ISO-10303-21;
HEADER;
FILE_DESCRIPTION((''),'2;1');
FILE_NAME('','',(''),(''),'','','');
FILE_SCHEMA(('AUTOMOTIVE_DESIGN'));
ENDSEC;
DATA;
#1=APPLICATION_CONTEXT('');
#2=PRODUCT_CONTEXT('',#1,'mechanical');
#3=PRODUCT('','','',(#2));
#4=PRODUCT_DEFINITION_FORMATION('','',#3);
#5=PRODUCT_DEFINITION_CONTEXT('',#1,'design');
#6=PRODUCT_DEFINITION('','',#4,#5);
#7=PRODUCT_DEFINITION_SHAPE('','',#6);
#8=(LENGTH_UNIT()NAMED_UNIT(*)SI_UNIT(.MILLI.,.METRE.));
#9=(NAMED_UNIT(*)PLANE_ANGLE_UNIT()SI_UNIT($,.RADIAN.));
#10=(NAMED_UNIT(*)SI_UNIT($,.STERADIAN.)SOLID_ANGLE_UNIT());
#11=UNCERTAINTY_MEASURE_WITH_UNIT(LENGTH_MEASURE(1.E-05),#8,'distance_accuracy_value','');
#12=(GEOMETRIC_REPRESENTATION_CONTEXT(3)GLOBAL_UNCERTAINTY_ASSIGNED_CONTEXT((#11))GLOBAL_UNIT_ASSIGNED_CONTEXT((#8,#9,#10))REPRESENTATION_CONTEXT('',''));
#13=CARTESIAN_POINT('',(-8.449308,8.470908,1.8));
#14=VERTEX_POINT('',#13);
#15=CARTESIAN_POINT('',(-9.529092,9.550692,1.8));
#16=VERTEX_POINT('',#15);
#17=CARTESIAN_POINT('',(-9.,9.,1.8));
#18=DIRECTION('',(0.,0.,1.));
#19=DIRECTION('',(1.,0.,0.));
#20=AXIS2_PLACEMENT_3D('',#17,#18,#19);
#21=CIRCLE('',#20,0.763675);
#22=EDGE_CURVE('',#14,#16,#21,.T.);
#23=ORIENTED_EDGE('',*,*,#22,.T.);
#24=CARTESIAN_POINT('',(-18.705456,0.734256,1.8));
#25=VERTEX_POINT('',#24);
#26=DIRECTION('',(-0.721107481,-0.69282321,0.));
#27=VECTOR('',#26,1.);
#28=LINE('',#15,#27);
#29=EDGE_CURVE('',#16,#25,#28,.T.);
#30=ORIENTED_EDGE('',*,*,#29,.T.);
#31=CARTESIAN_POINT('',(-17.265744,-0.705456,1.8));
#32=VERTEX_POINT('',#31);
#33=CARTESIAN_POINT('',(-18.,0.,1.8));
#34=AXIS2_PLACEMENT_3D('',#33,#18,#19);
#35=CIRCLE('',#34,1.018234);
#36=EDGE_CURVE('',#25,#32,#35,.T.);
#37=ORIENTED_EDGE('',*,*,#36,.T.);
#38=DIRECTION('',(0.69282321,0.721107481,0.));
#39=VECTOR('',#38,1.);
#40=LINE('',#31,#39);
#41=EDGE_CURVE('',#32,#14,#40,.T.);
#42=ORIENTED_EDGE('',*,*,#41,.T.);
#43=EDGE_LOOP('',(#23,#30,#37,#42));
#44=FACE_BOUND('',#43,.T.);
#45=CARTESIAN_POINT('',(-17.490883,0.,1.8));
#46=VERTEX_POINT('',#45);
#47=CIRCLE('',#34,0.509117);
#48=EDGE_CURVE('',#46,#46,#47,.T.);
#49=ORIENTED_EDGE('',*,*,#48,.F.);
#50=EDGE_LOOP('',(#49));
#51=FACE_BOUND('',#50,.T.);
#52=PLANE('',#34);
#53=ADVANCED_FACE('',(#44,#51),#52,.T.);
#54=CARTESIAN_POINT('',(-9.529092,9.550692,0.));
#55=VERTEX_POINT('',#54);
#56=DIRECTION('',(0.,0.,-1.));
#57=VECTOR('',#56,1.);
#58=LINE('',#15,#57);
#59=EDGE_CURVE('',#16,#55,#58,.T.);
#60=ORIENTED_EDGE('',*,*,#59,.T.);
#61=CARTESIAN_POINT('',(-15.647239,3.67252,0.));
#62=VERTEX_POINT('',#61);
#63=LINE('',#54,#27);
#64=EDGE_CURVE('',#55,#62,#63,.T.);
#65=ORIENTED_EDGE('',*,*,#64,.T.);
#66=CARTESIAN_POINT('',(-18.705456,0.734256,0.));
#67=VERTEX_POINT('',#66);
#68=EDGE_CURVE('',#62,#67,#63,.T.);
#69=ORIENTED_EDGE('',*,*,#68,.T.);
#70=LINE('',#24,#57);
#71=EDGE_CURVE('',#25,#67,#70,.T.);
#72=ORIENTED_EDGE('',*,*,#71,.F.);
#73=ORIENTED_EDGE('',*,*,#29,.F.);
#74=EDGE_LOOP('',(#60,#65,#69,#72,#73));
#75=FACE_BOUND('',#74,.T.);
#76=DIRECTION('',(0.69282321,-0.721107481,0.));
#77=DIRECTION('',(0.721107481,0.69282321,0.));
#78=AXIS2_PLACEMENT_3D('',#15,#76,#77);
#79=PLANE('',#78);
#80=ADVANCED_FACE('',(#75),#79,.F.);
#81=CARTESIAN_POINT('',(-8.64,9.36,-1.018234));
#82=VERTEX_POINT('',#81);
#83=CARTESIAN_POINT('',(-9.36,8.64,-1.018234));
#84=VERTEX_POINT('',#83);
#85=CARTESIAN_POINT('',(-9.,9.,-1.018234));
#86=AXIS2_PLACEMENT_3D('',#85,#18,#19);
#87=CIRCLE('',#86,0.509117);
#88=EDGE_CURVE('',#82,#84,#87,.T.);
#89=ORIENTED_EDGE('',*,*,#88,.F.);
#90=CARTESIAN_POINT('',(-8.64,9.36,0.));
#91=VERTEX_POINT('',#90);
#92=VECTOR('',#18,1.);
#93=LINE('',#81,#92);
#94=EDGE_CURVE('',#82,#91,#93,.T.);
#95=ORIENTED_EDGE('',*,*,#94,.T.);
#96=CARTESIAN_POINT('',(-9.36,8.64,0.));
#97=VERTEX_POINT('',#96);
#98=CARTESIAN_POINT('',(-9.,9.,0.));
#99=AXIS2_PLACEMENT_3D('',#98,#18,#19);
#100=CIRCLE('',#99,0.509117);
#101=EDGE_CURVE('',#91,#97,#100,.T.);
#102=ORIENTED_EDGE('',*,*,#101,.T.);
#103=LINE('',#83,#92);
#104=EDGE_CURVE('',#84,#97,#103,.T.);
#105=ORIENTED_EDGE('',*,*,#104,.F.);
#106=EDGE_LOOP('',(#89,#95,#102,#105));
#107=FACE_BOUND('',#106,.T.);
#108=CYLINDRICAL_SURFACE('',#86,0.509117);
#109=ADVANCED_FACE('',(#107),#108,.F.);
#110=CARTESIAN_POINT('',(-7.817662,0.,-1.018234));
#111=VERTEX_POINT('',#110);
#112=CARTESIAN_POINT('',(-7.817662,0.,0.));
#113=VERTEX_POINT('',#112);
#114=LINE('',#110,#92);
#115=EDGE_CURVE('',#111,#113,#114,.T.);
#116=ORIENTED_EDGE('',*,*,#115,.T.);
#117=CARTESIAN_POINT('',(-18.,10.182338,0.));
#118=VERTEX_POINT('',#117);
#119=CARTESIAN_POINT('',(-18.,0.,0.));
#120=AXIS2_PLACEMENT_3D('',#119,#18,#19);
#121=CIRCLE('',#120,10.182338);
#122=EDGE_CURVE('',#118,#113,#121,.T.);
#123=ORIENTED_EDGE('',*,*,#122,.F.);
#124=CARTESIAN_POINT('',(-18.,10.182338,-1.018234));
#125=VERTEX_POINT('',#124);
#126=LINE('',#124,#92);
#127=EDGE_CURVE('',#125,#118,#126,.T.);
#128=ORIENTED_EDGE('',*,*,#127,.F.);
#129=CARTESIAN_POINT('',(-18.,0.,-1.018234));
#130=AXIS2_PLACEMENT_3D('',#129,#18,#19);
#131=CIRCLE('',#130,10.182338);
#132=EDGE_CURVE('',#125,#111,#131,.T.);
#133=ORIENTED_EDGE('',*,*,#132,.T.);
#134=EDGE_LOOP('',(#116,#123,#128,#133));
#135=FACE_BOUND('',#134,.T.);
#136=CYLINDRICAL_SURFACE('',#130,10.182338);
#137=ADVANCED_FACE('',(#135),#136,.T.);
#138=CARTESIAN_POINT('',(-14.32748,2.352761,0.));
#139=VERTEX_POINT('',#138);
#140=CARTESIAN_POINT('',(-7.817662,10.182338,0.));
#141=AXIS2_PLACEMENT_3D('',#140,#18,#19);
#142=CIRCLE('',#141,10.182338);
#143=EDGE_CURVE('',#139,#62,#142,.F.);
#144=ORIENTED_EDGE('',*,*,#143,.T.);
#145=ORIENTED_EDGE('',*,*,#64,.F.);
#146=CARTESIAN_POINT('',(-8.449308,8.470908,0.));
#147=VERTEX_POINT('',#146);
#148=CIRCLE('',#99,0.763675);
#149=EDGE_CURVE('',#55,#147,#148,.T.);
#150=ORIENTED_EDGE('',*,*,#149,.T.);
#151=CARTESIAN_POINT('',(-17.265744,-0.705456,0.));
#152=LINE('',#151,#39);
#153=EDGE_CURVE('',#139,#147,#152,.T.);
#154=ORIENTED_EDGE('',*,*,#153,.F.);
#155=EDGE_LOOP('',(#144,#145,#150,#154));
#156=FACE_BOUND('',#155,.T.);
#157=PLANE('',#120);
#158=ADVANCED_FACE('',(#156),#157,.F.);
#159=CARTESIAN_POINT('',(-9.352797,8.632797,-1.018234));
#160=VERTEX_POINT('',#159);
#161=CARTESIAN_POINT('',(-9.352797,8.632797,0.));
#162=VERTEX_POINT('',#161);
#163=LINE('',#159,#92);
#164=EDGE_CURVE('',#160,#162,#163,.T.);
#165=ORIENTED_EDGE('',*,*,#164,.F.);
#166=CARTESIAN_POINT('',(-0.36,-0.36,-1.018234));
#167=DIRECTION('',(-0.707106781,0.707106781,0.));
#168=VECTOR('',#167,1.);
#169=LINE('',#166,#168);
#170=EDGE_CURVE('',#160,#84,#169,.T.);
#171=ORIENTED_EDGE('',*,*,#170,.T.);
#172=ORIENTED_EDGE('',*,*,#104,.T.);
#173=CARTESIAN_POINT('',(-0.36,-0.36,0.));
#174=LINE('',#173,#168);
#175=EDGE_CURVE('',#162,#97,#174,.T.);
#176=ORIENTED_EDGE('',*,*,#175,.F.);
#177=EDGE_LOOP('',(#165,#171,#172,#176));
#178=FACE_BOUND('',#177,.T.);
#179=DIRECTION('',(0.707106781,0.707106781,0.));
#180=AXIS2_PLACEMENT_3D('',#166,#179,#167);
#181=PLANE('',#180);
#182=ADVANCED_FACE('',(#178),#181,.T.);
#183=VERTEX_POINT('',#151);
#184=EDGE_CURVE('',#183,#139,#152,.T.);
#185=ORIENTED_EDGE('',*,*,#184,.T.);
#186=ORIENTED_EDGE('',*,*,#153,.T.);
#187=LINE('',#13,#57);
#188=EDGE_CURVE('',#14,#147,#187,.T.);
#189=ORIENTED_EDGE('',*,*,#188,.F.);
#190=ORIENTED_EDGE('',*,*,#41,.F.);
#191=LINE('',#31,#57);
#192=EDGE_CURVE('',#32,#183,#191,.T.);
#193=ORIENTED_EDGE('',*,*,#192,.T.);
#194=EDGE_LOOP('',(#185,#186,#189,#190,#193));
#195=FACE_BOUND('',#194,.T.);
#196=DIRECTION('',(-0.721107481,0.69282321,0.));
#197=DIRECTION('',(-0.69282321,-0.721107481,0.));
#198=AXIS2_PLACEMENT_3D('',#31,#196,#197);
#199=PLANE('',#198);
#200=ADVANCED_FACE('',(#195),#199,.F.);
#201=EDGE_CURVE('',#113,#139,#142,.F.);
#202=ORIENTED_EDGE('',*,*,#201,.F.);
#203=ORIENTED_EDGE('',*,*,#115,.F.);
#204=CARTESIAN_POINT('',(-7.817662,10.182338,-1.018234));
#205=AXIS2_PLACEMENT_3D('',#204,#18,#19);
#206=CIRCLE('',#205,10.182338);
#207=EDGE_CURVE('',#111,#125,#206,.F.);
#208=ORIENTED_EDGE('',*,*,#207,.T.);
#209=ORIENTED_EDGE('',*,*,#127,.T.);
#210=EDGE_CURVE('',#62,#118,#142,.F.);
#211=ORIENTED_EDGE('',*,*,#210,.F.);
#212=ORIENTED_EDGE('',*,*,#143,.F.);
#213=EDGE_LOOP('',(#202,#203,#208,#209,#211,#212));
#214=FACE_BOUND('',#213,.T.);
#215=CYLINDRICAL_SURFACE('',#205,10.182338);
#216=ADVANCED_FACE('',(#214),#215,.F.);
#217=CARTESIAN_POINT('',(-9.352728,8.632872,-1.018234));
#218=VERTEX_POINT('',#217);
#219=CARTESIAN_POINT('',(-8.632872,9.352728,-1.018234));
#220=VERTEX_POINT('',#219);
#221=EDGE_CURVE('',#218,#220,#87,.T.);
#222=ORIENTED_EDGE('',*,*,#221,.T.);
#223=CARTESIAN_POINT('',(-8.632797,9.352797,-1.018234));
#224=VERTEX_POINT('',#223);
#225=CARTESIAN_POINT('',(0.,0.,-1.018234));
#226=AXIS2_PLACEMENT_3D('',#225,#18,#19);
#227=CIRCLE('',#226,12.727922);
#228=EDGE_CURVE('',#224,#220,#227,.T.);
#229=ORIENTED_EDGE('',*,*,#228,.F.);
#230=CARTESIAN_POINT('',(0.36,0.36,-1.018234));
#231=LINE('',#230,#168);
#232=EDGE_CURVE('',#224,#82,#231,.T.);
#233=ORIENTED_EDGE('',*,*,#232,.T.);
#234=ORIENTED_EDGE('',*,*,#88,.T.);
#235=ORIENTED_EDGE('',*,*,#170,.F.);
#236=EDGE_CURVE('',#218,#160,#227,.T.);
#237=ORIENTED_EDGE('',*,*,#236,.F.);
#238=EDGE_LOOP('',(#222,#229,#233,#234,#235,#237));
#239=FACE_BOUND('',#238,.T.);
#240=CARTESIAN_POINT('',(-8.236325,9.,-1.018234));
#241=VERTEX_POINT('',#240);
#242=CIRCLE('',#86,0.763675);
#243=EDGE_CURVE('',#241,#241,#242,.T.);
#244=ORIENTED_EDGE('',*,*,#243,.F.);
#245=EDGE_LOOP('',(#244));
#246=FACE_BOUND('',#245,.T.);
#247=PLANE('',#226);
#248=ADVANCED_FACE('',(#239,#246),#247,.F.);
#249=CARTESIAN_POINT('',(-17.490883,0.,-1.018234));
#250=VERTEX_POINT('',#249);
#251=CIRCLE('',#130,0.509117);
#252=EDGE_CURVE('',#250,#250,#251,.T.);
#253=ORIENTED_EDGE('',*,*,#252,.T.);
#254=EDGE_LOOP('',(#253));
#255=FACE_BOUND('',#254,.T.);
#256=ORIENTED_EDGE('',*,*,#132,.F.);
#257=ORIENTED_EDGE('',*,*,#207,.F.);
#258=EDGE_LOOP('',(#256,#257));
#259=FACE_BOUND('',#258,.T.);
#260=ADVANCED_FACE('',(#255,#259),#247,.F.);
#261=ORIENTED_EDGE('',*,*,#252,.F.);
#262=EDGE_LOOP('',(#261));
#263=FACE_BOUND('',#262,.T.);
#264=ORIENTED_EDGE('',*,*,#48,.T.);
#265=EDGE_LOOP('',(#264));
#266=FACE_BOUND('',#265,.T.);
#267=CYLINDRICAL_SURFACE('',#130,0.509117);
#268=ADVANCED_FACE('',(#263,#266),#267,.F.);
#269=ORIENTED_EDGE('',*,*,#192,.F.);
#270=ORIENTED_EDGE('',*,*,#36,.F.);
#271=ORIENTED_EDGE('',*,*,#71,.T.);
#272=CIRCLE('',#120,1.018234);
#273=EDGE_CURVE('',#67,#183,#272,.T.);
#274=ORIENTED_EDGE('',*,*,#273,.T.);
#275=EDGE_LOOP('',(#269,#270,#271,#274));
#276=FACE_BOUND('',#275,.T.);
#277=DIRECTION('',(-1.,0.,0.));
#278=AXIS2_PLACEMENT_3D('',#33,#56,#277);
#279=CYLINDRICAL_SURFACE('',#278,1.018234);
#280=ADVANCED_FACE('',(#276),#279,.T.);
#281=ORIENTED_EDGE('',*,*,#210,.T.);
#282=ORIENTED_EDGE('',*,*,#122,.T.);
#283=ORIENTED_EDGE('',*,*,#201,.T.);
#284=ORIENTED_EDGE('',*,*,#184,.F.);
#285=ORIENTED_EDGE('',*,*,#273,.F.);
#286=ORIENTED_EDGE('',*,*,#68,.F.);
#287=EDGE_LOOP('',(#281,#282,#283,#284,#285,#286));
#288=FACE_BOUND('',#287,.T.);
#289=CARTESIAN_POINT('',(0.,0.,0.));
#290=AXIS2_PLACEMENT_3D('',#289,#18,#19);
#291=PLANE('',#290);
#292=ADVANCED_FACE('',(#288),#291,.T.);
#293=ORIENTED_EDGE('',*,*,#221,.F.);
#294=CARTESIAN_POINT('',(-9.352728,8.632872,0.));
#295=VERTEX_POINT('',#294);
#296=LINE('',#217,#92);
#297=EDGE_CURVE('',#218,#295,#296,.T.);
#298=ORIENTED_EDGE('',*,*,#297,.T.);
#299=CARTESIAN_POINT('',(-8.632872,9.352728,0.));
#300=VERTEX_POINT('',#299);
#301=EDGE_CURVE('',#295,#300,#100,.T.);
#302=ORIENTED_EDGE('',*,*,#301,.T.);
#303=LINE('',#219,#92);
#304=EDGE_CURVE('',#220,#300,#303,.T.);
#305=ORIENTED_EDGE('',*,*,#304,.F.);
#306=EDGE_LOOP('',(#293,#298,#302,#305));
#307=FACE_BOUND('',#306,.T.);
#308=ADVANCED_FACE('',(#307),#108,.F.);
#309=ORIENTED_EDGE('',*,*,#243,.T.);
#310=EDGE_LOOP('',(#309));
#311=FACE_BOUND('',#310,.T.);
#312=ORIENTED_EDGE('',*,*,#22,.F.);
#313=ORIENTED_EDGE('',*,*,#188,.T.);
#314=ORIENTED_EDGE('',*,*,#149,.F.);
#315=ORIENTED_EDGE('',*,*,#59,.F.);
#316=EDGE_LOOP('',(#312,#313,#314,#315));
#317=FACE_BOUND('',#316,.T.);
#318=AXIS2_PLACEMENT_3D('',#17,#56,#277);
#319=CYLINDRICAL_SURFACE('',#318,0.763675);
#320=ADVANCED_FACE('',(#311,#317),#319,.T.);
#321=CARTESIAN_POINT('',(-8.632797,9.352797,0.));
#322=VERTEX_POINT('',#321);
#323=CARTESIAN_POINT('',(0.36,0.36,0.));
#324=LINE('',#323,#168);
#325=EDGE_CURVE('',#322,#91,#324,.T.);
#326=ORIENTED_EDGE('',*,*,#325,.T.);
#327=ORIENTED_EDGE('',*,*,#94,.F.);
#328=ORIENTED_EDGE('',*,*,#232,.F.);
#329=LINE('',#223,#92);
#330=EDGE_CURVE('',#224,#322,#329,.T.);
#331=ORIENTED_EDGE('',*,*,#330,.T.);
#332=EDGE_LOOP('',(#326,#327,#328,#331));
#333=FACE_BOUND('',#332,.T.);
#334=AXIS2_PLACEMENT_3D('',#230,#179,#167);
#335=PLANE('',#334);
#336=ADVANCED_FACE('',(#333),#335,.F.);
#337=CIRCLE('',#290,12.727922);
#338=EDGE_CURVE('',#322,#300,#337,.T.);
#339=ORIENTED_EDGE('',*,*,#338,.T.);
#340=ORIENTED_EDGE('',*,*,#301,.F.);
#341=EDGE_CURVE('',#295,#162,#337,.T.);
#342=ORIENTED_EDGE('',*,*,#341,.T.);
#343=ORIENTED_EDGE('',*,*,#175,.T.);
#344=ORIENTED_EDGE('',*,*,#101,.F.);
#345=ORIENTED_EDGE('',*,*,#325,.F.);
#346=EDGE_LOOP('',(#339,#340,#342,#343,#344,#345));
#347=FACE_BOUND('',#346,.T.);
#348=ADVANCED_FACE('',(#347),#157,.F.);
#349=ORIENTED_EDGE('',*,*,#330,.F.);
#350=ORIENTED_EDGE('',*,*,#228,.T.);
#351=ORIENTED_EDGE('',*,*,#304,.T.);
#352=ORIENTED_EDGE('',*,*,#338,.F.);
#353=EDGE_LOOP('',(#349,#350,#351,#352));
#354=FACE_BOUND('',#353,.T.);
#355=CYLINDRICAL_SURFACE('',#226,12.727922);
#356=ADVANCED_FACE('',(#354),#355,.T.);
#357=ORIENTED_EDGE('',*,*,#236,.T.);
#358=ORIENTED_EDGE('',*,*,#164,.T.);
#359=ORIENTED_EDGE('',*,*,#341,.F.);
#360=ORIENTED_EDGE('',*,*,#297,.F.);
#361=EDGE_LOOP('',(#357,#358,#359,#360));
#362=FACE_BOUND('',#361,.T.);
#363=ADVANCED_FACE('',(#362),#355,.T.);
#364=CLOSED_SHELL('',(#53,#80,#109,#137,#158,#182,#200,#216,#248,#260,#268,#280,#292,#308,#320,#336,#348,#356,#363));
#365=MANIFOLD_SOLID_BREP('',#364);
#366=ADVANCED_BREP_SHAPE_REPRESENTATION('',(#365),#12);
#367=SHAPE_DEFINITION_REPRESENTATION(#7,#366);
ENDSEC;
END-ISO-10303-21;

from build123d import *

# Parameters (mm, degrees)
SALIENTE_EXTRUIR2_START       = -1.018233765
SALIENTE_EXTRUIR2_OUTLINE_R   = 0.509116882
SALIENTE_EXTRUIR2_OUTLINE_R_2 = 0.763675324
SALIENTE_EXTRUIR2_DEPTH       = 1.018233765
CROQUIS2_R                    = 0.509116882
SALIENTE_EXTRUIR3_DEPTH       = 1.8


# Read off the part's stored shape, not the designer's step: Saliente-Extruir2
with BuildPart() as part:
    # Saliente-Extruir2 outline → Saliente-Extruir2 (new body)
    # profile 1 of 2: a face of its own
    with BuildSketch(Plane.XY.offset(SALIENTE_EXTRUIR2_START)):
        with BuildLine():
            ThreePointArc((-7.817662351, 0), (-15.017662351, 2.982337649), (-18, 10.182337649))
            ThreePointArc((-18, 10.182337649), (-25.2, -7.2), (-7.817662351, 0))
        make_face()
        with Locations((-18, 0)):
            Circle(SALIENTE_EXTRUIR2_OUTLINE_R, mode=Mode.SUBTRACT)
    # profile 2 of 2: a face of its own
    with BuildSketch(Plane.XY.offset(SALIENTE_EXTRUIR2_START)):
        with Locations((-9, 9)):
            Circle(SALIENTE_EXTRUIR2_OUTLINE_R_2)
        with BuildLine():
            Line((-8.64, 9.36), (-8.632797118, 9.352797118))
            ThreePointArc((-8.632797118, 9.352797118), (-8.64, 8.64), (-9.352727993, 8.632872007))
            Line((-9.352727993, 8.632872007), (-9.36, 8.64))
            ThreePointArc((-9.36, 8.64), (-9.36, 9.36), (-8.64, 9.36))
        make_face(mode=Mode.SUBTRACT)
    extrude(amount=SALIENTE_EXTRUIR2_DEPTH)

    # Croquis2 → Saliente-Extruir3 (add)
    with BuildSketch(Plane.XY):
        with BuildLine():
            Line((-17.265744014, -0.705455986), (-8.449308011, 8.470908011))
            ThreePointArc((-8.449308011, 8.470908011), (-8.46, 9.54), (-9.529091989, 9.550691989))
            Line((-9.529091989, 9.550691989), (-18.705455986, 0.734255986))
            ThreePointArc((-18.705455986, 0.734255986), (-18.72, -0.72), (-17.265744014, -0.705455986))
        make_face()
        with Locations((-18, 0)):
            Circle(CROQUIS2_R, mode=Mode.SUBTRACT)
    extrude(amount=SALIENTE_EXTRUIR3_DEPTH)


solid = part.part
